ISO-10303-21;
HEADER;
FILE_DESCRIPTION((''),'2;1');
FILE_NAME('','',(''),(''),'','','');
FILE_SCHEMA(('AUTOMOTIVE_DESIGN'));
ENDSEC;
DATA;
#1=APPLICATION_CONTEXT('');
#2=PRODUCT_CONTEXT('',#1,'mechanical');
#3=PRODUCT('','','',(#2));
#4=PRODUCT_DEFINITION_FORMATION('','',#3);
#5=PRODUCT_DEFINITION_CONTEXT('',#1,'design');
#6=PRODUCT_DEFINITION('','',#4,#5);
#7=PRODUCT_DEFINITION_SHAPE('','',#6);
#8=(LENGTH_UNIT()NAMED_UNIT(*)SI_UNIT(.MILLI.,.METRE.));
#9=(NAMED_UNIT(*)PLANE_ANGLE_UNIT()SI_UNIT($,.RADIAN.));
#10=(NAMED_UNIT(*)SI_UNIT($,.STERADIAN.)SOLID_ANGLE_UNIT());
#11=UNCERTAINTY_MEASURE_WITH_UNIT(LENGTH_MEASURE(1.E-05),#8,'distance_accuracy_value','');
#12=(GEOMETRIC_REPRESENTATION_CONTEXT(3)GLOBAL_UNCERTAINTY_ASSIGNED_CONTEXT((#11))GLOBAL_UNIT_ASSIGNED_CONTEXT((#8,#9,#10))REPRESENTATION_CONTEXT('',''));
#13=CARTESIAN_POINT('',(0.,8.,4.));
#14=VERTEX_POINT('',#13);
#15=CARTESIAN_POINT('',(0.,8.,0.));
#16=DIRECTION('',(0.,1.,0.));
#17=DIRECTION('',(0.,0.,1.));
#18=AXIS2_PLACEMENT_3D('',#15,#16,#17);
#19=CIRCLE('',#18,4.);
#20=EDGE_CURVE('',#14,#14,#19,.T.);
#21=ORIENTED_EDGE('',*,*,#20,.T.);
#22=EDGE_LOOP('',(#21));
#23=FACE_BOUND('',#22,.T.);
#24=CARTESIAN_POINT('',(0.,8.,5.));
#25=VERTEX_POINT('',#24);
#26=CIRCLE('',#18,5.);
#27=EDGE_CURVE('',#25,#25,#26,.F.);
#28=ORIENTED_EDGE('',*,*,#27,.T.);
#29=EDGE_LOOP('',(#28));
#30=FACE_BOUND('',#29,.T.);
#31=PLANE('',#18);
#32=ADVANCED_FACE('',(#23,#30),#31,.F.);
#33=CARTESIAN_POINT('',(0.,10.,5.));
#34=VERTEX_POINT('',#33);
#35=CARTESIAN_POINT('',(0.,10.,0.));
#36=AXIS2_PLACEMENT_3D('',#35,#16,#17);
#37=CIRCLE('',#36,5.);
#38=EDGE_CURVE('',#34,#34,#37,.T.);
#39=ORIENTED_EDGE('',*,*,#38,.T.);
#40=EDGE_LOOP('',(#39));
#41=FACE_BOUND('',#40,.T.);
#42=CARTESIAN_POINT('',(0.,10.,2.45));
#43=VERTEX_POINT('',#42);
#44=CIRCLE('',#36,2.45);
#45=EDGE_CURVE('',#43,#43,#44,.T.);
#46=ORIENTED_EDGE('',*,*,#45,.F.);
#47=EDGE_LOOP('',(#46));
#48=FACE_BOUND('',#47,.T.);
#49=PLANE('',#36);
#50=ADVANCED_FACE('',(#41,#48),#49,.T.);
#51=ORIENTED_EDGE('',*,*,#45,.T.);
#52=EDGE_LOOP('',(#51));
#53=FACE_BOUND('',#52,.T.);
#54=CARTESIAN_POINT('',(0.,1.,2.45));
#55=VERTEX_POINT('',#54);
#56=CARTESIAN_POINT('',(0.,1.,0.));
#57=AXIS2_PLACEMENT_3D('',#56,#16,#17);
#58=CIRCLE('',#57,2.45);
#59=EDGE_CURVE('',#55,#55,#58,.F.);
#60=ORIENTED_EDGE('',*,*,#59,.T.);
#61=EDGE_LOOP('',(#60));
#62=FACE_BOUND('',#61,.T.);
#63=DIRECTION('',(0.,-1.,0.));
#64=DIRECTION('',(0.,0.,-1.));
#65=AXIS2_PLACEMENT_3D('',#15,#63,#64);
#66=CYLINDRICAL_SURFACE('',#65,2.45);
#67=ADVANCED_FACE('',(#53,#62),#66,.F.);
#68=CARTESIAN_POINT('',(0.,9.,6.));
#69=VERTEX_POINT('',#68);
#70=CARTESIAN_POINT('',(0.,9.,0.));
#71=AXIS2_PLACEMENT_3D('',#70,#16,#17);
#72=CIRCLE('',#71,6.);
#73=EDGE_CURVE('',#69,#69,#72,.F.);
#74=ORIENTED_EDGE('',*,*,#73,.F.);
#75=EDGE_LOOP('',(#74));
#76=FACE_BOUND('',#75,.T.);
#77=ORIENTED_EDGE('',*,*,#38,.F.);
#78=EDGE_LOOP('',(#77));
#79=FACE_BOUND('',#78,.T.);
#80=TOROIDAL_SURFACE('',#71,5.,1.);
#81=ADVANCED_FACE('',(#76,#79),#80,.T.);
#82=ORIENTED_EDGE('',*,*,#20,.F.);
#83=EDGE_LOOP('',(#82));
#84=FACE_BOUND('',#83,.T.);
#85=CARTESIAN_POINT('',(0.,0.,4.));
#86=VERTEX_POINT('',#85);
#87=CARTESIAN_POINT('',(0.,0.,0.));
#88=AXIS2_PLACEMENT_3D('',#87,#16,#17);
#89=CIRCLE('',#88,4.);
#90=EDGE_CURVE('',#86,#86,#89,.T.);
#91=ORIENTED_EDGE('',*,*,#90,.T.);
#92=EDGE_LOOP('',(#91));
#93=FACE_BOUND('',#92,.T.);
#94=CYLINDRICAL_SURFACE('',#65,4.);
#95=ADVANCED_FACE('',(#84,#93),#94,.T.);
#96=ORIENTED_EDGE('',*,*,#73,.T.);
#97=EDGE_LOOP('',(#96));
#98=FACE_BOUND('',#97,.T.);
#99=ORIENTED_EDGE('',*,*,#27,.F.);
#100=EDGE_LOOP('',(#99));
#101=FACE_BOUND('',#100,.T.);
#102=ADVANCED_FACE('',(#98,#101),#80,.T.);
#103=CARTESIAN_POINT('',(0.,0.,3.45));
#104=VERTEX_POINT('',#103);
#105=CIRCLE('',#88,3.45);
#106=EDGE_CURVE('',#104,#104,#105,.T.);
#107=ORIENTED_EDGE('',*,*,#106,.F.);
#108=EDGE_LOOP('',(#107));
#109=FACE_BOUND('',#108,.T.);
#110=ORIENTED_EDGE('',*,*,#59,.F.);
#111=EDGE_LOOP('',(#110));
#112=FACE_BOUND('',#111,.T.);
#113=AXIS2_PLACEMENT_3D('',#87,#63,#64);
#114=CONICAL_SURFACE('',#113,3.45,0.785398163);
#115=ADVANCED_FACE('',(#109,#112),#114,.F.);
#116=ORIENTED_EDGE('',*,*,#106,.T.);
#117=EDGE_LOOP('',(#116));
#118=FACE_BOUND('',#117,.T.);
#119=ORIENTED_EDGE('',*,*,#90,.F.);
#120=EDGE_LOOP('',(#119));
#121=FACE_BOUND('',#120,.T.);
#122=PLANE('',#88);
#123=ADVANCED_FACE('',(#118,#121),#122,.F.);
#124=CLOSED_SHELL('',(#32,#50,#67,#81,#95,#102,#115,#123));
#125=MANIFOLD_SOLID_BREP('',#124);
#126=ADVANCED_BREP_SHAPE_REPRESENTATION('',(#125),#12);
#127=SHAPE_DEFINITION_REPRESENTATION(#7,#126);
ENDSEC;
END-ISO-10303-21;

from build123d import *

# Parameters (mm, degrees)
SKETCH1_R           = 4
SKETCH1_R_2         = 2.45
BOSS_EXTRUDE1_DEPTH = 8
SKETCH2_R           = 6
BOSS_EXTRUDE2_DEPTH = 2
FILLET1_R           = 1
CUT_EXTRUDE1_REACH  = 15.115
SKETCH3_R           = 2.45
CHAMFER1_SIZE       = 1


with BuildPart() as part:
    # Sketch1 → Boss-Extrude1 (new body)
    with BuildSketch(Plane(origin=(0, 0, 0), x_dir=(1, 0, 0), z_dir=(0, 1, 0))):
        with Locations(Location((0, 0, 0), (0, 0, 270))):
            Circle(SKETCH1_R)
        with Locations(Location((0, 0, 0), (0, 0, 270))):
            Circle(SKETCH1_R_2, mode=Mode.SUBTRACT)
    extrude(amount=BOSS_EXTRUDE1_DEPTH)

    # Sketch2 → Boss-Extrude2 (add)
    with BuildSketch(Plane(origin=(0, 8, 0), x_dir=(1, 0, 0), z_dir=(0, 1, 0))):
        with Locations(Location((0, 0, 0), (0, 0, 270))):
            Circle(SKETCH2_R)
    extrude(amount=BOSS_EXTRUDE2_DEPTH)

    # Fillet1
    fillet1_edges = [part.edges().sort_by_distance(p)[0] for p in [
        (0, 8, -6),
        (0, 10, -6),
    ]]
    fillet(fillet1_edges, radius=FILLET1_R - 0.0001)  # a hair under: the kernel refuses the full size

    # Sketch3 → Cut-Extrude1 (cut, up to next)
    with BuildSketch(Plane(origin=(0, 10, 0), x_dir=(1, 0, 0), z_dir=(0, 1, 0)), mode=Mode.PRIVATE) as cut_extrude1_sk1:
        with Locations(Location((0, 0, 0), (0, 0, 270))):
            Circle(SKETCH3_R)
    cut_extrude1_tool1 = extrude(cut_extrude1_sk1.sketch, amount=-CUT_EXTRUDE1_REACH, mode=Mode.PRIVATE) & part.part
    add(cut_extrude1_tool1.solids().sort_by_distance((0, 10, 0))[0], mode=Mode.SUBTRACT)

    # Chamfer1
    chamfer1_edges = [part.edges().sort_by_distance(p)[0] for p in [
        (0, 0, -2.45),
    ]]
    chamfer(chamfer1_edges, length=CHAMFER1_SIZE)


solid = part.part
